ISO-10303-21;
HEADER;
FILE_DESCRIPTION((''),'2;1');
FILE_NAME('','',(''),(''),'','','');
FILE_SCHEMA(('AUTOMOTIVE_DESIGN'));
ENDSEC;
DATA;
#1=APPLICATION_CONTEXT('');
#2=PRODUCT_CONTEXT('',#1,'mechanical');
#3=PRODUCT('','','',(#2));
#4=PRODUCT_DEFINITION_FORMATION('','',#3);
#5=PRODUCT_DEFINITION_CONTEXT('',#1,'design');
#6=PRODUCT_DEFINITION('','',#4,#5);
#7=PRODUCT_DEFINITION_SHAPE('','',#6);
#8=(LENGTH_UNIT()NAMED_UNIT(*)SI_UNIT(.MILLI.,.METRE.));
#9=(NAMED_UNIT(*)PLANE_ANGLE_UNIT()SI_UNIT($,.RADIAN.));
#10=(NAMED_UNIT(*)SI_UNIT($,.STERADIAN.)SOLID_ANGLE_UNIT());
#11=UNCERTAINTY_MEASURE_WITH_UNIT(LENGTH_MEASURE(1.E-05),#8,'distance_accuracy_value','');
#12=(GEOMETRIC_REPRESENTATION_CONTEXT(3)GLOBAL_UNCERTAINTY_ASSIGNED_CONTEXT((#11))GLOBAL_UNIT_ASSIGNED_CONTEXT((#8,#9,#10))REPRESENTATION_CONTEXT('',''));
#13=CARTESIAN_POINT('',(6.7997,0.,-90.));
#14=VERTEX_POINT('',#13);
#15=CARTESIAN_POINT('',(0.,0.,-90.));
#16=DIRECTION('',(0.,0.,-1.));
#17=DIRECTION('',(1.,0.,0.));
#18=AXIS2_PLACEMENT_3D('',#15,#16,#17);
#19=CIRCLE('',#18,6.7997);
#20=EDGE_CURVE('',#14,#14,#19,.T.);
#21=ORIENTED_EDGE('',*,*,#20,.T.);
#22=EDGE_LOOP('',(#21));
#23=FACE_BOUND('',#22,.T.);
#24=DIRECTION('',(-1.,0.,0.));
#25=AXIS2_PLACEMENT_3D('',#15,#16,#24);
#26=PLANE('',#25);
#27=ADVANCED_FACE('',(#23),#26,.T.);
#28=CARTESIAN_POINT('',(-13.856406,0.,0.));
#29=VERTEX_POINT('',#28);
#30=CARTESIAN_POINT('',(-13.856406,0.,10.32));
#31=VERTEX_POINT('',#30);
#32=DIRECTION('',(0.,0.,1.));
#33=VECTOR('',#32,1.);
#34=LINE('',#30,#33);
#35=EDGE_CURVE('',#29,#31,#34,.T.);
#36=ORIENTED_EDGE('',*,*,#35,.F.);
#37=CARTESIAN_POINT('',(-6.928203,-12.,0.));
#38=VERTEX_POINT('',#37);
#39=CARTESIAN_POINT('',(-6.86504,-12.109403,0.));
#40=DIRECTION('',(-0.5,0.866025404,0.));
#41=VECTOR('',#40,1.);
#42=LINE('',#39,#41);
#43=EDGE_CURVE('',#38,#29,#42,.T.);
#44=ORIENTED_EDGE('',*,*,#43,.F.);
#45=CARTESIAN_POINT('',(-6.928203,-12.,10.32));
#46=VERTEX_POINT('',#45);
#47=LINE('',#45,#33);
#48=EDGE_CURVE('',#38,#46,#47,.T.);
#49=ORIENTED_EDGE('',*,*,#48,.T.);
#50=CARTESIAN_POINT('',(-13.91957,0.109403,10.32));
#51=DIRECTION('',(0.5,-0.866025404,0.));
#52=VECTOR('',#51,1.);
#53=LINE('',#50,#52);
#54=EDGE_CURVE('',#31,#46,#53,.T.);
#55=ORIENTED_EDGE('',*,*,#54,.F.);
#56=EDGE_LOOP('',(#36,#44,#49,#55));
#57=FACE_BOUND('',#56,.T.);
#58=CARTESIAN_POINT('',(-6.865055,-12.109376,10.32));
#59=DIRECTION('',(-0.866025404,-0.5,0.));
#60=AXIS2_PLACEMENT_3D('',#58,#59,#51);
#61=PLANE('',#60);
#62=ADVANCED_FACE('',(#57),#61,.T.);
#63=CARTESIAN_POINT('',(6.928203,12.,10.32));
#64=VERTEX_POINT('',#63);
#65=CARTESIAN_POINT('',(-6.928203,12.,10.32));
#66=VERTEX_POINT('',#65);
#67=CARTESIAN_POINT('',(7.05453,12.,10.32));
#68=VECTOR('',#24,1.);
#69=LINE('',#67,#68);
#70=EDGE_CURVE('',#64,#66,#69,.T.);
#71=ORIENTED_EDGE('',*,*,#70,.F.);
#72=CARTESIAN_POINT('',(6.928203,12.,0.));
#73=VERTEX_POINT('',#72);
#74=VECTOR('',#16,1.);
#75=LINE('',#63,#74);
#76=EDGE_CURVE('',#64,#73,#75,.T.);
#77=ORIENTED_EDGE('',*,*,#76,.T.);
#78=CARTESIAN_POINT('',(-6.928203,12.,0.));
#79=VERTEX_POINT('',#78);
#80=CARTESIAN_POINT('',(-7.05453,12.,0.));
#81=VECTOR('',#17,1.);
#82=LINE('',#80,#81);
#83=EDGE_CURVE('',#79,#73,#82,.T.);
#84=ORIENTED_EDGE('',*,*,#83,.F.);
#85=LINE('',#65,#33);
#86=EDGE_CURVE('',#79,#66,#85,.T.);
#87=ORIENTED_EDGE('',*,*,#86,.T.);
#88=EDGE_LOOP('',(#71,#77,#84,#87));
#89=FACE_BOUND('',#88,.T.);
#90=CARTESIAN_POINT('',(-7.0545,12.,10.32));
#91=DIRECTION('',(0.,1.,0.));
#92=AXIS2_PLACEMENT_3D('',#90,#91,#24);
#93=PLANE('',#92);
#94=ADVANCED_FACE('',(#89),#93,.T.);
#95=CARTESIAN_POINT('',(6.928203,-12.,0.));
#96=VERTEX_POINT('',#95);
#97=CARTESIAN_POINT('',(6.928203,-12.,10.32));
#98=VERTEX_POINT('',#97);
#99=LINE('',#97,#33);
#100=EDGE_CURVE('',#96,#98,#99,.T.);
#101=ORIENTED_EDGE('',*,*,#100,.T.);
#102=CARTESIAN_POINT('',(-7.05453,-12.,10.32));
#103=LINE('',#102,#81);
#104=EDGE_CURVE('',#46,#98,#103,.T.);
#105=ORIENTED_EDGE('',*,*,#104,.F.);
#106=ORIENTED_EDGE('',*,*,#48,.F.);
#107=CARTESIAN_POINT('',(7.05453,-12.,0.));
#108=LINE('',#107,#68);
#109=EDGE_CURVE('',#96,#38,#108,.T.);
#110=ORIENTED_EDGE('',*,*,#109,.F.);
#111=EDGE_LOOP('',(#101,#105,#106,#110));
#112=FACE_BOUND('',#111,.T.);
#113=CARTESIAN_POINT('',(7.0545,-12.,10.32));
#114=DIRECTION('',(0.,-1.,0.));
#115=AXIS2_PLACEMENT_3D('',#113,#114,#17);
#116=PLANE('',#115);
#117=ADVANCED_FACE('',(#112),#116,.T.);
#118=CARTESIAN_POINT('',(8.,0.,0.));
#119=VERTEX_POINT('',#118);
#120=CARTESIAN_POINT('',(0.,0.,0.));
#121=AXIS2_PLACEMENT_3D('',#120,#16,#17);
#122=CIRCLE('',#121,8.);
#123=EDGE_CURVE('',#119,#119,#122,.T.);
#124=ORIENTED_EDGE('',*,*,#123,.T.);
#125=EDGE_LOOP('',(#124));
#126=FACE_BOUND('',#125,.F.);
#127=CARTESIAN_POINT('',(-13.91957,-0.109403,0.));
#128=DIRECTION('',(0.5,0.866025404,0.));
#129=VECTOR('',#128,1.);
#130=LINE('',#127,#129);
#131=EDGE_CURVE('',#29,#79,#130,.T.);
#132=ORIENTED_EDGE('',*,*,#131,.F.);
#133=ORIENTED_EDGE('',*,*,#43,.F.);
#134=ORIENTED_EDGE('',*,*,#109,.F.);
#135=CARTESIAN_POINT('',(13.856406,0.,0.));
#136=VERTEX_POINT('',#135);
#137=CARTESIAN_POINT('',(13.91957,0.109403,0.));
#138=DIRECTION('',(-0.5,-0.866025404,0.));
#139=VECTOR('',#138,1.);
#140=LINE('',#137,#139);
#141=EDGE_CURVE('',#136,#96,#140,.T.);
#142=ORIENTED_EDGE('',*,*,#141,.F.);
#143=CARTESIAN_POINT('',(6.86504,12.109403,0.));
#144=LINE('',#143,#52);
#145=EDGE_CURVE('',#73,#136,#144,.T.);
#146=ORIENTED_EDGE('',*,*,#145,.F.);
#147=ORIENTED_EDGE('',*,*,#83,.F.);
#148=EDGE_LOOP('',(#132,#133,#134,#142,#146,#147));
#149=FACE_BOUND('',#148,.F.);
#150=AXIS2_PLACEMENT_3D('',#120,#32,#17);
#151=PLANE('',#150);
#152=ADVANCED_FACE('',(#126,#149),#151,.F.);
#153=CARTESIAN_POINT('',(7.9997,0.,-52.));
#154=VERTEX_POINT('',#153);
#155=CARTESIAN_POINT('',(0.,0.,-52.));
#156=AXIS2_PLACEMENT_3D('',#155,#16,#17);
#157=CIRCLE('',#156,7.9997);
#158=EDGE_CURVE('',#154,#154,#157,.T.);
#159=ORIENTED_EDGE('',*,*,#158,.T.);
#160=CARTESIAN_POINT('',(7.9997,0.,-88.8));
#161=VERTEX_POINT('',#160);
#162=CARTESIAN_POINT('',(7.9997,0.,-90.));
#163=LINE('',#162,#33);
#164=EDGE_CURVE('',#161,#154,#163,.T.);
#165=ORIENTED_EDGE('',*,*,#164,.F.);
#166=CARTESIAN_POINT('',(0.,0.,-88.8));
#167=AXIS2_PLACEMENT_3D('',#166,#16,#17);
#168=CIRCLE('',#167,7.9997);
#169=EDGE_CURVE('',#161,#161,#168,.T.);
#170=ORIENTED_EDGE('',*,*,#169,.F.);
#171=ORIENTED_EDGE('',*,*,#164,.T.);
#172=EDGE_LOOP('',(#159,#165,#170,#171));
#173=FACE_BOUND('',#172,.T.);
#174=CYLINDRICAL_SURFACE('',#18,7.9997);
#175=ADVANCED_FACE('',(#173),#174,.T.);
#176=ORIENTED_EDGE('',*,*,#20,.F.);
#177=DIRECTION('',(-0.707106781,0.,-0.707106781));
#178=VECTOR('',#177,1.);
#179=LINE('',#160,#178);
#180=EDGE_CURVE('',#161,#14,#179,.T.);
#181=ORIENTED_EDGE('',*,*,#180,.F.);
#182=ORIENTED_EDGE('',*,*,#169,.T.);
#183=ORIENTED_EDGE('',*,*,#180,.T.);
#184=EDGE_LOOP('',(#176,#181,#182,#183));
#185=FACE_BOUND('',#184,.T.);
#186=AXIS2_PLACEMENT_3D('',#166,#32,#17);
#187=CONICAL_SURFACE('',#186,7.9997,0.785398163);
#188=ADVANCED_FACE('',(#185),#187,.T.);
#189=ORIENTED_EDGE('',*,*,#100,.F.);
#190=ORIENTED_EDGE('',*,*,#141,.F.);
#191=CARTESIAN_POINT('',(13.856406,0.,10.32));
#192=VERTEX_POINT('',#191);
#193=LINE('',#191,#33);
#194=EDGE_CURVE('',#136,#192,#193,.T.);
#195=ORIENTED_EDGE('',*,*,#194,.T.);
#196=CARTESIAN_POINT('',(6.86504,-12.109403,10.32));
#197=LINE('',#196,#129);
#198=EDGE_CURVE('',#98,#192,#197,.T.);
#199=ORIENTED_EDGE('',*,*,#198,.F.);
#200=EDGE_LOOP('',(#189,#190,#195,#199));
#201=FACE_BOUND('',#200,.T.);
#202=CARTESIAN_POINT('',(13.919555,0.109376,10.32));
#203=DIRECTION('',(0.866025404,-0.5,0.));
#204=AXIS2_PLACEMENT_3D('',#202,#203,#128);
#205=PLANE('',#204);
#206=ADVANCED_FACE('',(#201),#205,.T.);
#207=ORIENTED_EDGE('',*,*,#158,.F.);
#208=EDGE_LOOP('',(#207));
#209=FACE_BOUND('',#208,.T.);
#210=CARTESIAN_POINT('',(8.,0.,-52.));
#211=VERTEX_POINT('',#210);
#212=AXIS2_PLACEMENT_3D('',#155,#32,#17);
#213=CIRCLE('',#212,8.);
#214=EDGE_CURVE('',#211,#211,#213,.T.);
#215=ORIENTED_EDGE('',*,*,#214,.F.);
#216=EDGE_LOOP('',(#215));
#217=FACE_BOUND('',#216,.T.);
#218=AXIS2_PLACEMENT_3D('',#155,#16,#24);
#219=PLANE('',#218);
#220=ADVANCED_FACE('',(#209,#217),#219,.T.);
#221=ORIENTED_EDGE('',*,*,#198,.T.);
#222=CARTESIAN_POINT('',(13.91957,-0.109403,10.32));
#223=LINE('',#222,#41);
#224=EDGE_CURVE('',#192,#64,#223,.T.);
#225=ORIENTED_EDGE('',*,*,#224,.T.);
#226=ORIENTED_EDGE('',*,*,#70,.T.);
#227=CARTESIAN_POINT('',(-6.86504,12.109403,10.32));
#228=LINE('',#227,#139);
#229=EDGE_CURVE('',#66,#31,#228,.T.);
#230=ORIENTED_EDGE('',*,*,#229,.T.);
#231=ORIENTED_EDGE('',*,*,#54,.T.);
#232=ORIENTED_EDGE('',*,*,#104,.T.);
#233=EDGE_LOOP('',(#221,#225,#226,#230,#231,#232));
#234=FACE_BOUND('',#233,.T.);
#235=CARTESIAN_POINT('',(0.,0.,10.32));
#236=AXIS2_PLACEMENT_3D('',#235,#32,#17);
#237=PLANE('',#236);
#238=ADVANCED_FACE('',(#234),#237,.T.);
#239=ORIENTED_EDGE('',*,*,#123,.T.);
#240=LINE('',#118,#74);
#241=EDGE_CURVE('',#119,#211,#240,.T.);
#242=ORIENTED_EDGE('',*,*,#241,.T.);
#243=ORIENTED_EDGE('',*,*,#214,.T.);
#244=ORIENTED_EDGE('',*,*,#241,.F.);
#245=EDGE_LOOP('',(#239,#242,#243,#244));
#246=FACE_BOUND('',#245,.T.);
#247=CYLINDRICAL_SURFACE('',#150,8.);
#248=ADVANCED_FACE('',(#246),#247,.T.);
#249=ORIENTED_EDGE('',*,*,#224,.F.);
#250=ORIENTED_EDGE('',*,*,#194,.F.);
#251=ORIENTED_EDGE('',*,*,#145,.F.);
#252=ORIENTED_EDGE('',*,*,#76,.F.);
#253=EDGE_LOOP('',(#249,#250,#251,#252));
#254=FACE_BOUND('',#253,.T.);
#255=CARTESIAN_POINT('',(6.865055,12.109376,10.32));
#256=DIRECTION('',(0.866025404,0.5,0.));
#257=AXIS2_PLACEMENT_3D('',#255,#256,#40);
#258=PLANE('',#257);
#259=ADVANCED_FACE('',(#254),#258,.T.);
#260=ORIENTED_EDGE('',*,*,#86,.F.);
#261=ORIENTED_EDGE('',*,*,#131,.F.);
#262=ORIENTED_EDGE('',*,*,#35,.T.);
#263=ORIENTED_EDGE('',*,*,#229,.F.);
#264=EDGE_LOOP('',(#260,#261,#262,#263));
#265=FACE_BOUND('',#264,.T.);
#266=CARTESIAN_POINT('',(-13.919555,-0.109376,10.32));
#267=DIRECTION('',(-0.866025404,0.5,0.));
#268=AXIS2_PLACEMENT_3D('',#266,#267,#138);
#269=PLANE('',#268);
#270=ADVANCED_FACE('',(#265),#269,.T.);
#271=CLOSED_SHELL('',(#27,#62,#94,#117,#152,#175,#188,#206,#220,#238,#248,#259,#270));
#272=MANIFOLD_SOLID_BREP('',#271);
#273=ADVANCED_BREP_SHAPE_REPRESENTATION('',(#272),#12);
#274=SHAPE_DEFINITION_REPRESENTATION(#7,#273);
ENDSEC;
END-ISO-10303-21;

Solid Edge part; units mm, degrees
sketch "Sketch1" plane through (0, 0, 0) normal (0, 0, 1) x (1, 0, 0)
  circle A0 centre (0, 0) radius 13.92
  dimension "D1" = 27.84
extrude "Protrusion1" add sketch "Sketch1" along normal blind 10.32
sketch "Sketch2" plane through (0, 0, 0) normal (0, 0, -1) x (1, 0, 0)
  circle A0 centre (0, 0) radius 8
extrude "Protrusion2" add sketch "Sketch2" along normal blind 90
sketch "Sketch3" plane through (0, 0, -90) normal (0, 0, -1) x (1, 0, 0)
  circle A0 centre (0, 0) radius 7.9997
extrude "Cutout1" cut sketch "Sketch3" against normal blind 38 flip side to cut
chamfer "Chamfer_1" distance 1.2 angle 45 1 edges at (-7.9997, 0, -90)
sketch "Sketch4" plane through (0, 0, 10.32) normal (0, 0, 1) x (1, 0, 0)
  line L0 (-7.0545, 12) -> (7.0545, 12)
  dimension "D1" = 24
extrude "Cutout2" cut sketch "Sketch4" against normal up to next material side at (0, 12.05, 10.32)
pattern_circular "Pattern1" count 6 over 360 about axis through (0, 0, 10.32) along (0, 0, 1) of "Cutout2"
properties part number "24104519"
